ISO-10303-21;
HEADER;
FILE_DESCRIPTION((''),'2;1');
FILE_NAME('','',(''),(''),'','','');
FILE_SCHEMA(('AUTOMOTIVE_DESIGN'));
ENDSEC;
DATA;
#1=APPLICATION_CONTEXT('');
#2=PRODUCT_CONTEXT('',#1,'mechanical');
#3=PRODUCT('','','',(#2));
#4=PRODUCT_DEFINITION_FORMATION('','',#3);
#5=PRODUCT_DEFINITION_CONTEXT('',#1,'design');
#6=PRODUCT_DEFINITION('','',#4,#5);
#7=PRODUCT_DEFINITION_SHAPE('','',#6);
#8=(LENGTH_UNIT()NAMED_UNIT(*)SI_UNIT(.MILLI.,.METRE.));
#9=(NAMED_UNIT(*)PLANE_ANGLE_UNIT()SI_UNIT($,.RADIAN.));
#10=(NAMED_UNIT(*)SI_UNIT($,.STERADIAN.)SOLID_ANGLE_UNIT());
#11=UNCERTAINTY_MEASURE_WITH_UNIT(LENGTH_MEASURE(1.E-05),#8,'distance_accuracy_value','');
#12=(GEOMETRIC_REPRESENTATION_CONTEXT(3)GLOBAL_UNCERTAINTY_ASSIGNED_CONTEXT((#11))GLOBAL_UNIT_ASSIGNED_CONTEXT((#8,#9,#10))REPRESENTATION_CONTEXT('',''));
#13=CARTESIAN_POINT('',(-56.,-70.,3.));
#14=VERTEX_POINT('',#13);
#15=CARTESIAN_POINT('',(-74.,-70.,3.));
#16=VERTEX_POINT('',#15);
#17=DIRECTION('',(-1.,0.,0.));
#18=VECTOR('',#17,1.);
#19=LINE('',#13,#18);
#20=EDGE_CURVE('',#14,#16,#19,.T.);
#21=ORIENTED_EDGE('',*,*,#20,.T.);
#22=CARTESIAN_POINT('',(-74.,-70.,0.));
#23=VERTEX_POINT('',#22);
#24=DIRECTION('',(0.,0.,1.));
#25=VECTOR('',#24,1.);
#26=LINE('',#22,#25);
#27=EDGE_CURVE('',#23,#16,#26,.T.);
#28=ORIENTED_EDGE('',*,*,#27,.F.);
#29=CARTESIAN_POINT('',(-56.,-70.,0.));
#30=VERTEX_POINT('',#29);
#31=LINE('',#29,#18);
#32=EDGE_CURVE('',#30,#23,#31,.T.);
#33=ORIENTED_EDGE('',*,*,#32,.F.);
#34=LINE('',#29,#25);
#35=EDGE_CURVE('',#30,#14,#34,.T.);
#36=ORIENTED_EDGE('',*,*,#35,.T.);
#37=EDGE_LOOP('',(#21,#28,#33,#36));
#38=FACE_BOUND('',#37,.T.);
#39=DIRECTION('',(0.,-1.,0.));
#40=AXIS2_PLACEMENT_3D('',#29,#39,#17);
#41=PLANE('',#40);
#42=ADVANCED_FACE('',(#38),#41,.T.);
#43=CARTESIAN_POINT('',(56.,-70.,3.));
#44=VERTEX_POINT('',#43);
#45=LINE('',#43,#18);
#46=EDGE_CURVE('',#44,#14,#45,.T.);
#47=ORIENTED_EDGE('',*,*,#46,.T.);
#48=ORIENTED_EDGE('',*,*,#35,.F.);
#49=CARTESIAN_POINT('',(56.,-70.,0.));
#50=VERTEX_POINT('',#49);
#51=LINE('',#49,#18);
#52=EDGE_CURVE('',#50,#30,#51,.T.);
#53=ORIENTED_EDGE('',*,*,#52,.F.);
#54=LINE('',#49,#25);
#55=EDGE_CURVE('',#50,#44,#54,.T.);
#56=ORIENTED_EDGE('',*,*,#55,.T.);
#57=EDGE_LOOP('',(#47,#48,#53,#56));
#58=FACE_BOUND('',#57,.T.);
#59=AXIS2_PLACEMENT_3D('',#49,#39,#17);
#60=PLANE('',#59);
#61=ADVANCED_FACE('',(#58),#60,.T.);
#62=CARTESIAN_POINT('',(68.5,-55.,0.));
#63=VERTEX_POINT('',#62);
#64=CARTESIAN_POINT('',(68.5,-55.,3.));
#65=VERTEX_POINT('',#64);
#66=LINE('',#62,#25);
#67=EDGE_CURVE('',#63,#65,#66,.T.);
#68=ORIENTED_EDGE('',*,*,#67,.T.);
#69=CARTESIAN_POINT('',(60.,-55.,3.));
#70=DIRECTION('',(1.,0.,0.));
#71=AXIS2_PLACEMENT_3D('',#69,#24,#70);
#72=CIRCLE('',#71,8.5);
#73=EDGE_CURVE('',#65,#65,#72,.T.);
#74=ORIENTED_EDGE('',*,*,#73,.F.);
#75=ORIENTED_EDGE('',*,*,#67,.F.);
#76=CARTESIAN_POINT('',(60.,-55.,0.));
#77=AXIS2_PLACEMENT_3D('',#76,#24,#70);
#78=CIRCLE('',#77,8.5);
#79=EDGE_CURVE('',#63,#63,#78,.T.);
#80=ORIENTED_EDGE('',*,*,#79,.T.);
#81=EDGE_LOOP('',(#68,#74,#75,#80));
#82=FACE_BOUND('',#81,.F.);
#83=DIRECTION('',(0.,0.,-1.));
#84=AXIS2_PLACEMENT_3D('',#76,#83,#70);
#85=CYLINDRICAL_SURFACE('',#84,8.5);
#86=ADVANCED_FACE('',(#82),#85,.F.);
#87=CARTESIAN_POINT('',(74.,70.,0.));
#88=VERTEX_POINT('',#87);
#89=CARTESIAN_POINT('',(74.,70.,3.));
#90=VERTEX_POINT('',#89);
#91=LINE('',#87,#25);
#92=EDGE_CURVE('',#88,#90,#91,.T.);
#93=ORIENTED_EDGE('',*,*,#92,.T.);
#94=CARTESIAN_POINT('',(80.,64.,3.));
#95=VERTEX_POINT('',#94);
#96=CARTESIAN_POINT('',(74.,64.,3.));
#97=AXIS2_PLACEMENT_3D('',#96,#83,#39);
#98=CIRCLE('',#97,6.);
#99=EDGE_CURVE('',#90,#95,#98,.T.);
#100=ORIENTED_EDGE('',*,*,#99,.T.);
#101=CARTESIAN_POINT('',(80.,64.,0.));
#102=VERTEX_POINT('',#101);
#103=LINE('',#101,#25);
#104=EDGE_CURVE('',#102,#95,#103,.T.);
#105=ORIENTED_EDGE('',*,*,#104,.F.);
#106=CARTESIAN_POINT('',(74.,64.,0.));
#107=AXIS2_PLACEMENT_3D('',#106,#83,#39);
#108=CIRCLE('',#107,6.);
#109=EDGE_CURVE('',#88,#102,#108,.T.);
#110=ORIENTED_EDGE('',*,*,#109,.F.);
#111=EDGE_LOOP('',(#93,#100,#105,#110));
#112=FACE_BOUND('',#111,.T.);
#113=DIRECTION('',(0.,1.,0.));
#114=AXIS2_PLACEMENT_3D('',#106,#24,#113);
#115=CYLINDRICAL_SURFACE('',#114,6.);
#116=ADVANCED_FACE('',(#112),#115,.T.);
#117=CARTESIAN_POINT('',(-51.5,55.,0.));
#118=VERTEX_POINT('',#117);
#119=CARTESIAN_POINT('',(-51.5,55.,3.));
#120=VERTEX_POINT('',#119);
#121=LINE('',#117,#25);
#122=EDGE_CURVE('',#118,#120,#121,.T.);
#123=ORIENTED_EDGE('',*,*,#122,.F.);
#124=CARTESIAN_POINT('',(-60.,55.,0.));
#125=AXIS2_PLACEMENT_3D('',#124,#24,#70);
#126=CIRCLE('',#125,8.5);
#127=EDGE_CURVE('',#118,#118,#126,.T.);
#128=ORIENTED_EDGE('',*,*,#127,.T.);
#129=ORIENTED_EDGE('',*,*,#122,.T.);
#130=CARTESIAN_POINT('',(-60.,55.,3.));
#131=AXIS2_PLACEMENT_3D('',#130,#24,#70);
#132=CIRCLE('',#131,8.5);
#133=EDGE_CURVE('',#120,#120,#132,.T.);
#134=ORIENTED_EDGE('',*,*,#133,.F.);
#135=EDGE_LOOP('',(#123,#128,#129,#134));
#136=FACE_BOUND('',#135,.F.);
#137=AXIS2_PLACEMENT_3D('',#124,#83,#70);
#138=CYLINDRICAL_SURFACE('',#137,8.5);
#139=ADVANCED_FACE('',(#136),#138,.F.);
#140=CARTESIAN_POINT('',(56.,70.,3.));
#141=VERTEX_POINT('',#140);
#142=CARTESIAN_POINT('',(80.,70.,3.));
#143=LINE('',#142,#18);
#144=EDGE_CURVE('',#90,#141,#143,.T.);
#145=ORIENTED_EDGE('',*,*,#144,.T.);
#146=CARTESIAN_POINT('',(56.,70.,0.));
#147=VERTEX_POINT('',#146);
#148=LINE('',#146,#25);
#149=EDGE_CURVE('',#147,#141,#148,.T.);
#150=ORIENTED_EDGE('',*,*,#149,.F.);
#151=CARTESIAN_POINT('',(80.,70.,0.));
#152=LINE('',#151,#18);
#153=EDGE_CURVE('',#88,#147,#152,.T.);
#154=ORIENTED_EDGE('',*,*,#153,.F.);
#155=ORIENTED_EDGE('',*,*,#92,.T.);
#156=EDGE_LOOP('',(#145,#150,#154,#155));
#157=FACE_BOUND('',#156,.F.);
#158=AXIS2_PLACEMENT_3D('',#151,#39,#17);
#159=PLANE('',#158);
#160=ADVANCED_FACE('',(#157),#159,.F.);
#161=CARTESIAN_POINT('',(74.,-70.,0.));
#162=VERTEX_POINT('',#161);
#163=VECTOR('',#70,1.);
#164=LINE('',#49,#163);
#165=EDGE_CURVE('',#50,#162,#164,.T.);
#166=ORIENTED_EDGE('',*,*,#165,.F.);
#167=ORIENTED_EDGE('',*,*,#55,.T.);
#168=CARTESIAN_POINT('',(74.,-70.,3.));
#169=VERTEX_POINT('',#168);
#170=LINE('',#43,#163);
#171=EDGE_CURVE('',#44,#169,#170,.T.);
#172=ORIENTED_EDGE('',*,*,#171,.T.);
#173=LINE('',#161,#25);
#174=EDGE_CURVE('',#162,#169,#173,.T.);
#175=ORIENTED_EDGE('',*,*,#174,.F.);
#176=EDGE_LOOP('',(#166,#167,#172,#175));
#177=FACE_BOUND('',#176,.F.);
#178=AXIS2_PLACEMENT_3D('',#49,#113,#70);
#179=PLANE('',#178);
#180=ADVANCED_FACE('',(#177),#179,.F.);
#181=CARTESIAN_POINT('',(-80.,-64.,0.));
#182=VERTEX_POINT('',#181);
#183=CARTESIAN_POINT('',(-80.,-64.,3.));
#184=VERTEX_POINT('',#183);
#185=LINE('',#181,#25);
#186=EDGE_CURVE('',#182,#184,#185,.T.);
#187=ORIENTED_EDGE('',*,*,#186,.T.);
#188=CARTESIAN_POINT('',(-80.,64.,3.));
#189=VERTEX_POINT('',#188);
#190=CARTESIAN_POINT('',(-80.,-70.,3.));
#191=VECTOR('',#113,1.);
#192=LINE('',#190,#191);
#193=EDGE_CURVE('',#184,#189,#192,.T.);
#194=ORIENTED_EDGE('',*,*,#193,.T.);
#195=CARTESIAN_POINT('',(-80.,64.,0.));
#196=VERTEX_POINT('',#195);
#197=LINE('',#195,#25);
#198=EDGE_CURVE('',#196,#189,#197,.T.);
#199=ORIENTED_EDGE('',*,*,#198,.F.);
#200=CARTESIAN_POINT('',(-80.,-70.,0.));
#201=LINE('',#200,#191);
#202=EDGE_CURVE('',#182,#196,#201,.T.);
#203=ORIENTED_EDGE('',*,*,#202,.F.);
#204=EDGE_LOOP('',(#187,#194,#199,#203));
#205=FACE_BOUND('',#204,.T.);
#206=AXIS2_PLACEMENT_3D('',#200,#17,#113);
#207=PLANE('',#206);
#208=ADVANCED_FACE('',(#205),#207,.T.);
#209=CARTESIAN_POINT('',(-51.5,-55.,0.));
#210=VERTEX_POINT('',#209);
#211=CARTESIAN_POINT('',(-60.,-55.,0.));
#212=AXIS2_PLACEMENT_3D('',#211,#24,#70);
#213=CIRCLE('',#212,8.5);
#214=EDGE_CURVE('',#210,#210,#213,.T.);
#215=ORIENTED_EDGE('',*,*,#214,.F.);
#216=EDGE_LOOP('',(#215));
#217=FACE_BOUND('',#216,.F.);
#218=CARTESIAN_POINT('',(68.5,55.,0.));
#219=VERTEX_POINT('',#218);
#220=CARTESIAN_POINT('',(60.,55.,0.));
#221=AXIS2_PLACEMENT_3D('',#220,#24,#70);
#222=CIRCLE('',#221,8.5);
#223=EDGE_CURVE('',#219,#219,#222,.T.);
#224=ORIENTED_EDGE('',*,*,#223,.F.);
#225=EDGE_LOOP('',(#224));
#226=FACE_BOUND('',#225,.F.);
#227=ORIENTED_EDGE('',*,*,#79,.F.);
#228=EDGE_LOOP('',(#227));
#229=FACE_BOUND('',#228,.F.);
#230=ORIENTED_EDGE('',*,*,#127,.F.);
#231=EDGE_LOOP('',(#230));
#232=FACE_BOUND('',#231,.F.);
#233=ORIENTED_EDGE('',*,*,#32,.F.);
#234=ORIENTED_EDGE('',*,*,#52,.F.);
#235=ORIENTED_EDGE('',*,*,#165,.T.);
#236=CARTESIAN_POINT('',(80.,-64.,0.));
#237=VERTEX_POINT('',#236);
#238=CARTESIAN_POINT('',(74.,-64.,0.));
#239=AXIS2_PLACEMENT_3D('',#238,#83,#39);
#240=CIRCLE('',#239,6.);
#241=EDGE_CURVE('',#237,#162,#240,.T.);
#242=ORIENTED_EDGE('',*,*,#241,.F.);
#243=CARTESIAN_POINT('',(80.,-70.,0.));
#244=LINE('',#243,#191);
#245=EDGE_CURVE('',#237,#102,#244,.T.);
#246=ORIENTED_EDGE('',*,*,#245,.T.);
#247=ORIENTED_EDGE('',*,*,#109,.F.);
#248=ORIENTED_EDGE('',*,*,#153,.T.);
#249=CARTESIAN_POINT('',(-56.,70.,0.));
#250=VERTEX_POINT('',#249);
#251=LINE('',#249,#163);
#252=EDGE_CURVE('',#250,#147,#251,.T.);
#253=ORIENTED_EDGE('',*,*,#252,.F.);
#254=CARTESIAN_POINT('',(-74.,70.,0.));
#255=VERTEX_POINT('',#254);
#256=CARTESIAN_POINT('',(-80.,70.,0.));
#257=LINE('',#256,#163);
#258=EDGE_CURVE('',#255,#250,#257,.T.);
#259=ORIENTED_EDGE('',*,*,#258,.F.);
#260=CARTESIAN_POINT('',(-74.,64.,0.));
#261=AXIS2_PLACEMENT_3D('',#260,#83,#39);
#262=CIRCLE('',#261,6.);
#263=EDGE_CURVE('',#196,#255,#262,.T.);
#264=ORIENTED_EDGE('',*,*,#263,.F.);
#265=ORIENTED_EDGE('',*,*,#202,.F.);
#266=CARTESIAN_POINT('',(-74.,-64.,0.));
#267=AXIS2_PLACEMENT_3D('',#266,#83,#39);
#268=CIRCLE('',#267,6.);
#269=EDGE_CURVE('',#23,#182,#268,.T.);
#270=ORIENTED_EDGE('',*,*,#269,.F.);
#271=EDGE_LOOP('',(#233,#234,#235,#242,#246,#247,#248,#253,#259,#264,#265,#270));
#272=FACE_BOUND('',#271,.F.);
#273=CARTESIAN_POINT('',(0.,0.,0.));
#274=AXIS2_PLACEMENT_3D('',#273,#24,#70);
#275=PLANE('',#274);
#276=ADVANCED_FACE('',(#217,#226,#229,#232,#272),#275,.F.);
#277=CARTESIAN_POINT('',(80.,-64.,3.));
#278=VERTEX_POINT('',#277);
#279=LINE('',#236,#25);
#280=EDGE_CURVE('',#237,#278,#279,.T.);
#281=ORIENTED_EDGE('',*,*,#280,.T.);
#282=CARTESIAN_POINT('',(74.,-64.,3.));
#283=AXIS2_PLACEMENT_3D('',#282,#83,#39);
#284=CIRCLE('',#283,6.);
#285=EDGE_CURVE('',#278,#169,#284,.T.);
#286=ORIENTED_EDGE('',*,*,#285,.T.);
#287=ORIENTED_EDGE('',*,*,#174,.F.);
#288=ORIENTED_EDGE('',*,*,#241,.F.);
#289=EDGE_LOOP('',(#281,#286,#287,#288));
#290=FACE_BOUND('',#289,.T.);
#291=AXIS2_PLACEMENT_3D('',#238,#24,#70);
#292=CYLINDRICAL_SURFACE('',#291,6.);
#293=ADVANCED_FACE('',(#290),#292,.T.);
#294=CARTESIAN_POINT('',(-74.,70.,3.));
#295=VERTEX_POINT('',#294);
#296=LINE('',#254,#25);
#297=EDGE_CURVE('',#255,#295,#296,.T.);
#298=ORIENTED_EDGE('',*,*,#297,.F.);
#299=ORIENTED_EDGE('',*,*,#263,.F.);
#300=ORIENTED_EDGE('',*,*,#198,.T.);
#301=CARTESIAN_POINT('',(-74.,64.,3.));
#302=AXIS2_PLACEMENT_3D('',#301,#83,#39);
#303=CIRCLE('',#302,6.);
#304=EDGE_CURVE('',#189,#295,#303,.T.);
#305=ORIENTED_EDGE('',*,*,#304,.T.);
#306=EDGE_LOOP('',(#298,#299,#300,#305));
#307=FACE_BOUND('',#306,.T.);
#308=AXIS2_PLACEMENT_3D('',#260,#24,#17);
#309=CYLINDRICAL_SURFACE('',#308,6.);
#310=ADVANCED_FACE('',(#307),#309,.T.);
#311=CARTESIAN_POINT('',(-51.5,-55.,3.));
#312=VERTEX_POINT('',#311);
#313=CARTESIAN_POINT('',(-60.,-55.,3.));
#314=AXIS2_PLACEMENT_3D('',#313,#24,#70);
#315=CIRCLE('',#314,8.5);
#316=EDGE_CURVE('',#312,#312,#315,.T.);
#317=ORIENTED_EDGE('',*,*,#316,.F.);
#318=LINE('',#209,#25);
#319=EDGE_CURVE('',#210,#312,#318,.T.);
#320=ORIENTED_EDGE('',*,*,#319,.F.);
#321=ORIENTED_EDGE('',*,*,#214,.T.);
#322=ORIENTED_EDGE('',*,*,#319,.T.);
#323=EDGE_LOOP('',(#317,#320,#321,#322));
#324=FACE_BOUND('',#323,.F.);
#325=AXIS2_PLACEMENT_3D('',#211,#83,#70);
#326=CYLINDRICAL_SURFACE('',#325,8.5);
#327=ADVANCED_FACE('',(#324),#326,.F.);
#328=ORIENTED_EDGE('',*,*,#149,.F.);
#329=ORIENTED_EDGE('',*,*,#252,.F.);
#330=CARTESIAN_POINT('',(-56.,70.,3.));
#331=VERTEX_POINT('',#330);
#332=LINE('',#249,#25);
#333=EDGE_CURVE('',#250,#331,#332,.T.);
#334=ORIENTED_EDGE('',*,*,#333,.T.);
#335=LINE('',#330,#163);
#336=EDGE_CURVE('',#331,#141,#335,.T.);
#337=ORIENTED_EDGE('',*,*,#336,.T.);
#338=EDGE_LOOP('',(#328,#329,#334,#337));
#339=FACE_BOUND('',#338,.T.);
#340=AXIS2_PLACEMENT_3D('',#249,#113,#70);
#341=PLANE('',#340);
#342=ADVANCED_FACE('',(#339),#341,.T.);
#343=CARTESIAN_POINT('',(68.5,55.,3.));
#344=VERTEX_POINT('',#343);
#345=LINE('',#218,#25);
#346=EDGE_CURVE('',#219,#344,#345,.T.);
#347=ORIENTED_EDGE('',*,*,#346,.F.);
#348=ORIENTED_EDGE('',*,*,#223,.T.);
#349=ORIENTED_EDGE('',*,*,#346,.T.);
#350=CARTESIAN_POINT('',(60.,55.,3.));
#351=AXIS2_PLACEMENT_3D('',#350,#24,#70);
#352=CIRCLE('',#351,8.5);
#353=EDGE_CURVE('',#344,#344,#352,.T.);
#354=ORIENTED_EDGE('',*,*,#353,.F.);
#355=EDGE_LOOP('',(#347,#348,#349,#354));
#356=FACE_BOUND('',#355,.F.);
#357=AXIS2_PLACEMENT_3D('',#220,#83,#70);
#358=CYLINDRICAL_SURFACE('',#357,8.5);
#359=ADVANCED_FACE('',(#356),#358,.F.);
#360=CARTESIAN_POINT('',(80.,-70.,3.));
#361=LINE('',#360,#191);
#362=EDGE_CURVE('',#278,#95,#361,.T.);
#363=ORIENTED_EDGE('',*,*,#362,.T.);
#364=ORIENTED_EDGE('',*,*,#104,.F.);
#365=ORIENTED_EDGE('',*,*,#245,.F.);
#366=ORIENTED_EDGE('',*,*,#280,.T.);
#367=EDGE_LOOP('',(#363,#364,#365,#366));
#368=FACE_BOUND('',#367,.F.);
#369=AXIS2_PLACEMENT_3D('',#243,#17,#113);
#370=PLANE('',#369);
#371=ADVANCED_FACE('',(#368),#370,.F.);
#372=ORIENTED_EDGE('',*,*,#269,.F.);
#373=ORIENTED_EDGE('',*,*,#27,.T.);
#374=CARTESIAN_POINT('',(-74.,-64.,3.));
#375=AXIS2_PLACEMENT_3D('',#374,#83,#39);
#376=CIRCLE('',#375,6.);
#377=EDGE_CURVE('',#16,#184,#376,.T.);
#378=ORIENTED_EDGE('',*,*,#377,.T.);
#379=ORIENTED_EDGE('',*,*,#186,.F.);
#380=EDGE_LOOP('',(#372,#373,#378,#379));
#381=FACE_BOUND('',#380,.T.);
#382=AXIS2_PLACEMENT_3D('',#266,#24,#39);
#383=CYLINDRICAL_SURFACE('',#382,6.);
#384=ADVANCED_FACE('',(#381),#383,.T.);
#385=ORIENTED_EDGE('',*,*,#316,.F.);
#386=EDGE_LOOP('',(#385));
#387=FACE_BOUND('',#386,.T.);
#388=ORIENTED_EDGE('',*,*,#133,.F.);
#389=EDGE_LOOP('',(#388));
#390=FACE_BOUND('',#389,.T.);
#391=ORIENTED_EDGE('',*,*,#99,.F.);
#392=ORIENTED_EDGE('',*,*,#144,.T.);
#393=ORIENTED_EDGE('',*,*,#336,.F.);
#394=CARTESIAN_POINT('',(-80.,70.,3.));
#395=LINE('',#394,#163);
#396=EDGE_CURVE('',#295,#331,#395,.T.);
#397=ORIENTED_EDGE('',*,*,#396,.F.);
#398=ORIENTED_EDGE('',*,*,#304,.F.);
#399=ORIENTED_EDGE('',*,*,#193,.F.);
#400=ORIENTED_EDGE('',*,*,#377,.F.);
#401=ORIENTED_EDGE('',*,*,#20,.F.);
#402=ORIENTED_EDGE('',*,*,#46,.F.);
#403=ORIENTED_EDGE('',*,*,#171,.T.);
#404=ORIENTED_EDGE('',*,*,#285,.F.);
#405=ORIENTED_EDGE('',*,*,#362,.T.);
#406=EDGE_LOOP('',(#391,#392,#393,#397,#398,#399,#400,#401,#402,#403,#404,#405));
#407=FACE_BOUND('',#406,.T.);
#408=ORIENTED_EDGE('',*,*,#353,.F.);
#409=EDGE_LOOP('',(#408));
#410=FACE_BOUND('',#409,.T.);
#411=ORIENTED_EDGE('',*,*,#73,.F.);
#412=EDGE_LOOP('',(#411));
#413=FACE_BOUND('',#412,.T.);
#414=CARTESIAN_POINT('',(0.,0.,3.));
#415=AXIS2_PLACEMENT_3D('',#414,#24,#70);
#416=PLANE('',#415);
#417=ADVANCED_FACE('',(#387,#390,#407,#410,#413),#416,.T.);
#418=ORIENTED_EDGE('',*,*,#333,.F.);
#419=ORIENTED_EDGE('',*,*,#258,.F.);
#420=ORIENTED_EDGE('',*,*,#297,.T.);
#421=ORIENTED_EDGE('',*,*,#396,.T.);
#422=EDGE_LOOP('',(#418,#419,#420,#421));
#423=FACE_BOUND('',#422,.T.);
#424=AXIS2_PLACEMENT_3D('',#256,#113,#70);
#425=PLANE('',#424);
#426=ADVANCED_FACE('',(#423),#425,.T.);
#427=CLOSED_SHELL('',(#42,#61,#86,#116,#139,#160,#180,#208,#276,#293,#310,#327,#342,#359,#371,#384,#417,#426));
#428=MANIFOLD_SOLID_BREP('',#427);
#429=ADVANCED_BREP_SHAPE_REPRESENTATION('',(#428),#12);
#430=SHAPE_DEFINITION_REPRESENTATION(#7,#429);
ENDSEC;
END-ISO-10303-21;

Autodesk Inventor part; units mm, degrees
ref_plane "YZ Plane" through (0, 0, 0) normal (1, 0, 0) x (0, 1, 0)
ref_plane "XZ Plane" through (0, 0, 0) normal (0, 1, 0) x (-1, 0, 0)
ref_plane "XY Plane" through (0, 0, 0) normal (0, 0, 1) x (1, 0, 0)
sketch3d "3D Sketch1"
sketch "Sketch1" plane through (0, 0, 0) normal (0, 0, 1) x (1, 0, 0)
  line L0 (-56, 70) -> (56, 70)
  line L1 (56, 70) -> (56, -70) construction
  line L2 (56, -70) -> (-56, -70)
  line L3 (-56, -70) -> (-56, 70) construction
  line L4 (-56, 70) -> (56, -70) construction
  line L5 (56, 70) -> (-56, -70) construction
  line L6 (56, -70) -> (80, -70)
  line L7 (80, -70) -> (80, 70)
  line L8 (80, 70) -> (56, 70)
  line L9 (-56, -70) -> (-80, -70)
  line L10 (-80, -70) -> (-80, 70)
  line L11 (-80, 70) -> (-56, 70)
  circle A0 centre (60, -55) radius 8.5
  circle A1 centre (60, 55) radius 8.5
  circle A2 centre (-60, -55) radius 8.5
  circle A3 centre (-60, 55) radius 8.5
  line L12 (0, -70) -> (0, 70) construction
  line L13 (80, 0) -> (-80, 0) construction
  point P0 (0, 0)
  dimension "d30" = 140
  dimension "d34" = 160
  dimension "d35" = 17
  dimension "d36" = 20
  dimension "d37" = 15
extrude "Plate1" add sketch "Sketch1" along normal blind 3
fillet "Corner Round1" radius 6 4 edges at (80, 70, 1.5) (-80, 70, 1.5) (-80, -70, 1.5) (80, -70, 1.5)
equation "\"d6\" = Thickness"
equation "\"BendReliefWidth\" = Thickness"
equation "\"BendReliefDepth\" = 0.5 * Thickness"
equation "\"CornerReliefSize\" = 4 * Thickness"
equation "\"MinimumRemnant\" = 2 * Thickness"
equation "\"TransitionRadius\" = BendRadius"
equation "\"JacobiRadiusSize\" = BendRadius"
equation "\"GapSize\" = Thickness"
equation "\"Thickness\" = 3"
equation "\"BendRadius\" = 5"
properties part number "MSC 908 transverse pillar plate" material "Stainless Steel"
